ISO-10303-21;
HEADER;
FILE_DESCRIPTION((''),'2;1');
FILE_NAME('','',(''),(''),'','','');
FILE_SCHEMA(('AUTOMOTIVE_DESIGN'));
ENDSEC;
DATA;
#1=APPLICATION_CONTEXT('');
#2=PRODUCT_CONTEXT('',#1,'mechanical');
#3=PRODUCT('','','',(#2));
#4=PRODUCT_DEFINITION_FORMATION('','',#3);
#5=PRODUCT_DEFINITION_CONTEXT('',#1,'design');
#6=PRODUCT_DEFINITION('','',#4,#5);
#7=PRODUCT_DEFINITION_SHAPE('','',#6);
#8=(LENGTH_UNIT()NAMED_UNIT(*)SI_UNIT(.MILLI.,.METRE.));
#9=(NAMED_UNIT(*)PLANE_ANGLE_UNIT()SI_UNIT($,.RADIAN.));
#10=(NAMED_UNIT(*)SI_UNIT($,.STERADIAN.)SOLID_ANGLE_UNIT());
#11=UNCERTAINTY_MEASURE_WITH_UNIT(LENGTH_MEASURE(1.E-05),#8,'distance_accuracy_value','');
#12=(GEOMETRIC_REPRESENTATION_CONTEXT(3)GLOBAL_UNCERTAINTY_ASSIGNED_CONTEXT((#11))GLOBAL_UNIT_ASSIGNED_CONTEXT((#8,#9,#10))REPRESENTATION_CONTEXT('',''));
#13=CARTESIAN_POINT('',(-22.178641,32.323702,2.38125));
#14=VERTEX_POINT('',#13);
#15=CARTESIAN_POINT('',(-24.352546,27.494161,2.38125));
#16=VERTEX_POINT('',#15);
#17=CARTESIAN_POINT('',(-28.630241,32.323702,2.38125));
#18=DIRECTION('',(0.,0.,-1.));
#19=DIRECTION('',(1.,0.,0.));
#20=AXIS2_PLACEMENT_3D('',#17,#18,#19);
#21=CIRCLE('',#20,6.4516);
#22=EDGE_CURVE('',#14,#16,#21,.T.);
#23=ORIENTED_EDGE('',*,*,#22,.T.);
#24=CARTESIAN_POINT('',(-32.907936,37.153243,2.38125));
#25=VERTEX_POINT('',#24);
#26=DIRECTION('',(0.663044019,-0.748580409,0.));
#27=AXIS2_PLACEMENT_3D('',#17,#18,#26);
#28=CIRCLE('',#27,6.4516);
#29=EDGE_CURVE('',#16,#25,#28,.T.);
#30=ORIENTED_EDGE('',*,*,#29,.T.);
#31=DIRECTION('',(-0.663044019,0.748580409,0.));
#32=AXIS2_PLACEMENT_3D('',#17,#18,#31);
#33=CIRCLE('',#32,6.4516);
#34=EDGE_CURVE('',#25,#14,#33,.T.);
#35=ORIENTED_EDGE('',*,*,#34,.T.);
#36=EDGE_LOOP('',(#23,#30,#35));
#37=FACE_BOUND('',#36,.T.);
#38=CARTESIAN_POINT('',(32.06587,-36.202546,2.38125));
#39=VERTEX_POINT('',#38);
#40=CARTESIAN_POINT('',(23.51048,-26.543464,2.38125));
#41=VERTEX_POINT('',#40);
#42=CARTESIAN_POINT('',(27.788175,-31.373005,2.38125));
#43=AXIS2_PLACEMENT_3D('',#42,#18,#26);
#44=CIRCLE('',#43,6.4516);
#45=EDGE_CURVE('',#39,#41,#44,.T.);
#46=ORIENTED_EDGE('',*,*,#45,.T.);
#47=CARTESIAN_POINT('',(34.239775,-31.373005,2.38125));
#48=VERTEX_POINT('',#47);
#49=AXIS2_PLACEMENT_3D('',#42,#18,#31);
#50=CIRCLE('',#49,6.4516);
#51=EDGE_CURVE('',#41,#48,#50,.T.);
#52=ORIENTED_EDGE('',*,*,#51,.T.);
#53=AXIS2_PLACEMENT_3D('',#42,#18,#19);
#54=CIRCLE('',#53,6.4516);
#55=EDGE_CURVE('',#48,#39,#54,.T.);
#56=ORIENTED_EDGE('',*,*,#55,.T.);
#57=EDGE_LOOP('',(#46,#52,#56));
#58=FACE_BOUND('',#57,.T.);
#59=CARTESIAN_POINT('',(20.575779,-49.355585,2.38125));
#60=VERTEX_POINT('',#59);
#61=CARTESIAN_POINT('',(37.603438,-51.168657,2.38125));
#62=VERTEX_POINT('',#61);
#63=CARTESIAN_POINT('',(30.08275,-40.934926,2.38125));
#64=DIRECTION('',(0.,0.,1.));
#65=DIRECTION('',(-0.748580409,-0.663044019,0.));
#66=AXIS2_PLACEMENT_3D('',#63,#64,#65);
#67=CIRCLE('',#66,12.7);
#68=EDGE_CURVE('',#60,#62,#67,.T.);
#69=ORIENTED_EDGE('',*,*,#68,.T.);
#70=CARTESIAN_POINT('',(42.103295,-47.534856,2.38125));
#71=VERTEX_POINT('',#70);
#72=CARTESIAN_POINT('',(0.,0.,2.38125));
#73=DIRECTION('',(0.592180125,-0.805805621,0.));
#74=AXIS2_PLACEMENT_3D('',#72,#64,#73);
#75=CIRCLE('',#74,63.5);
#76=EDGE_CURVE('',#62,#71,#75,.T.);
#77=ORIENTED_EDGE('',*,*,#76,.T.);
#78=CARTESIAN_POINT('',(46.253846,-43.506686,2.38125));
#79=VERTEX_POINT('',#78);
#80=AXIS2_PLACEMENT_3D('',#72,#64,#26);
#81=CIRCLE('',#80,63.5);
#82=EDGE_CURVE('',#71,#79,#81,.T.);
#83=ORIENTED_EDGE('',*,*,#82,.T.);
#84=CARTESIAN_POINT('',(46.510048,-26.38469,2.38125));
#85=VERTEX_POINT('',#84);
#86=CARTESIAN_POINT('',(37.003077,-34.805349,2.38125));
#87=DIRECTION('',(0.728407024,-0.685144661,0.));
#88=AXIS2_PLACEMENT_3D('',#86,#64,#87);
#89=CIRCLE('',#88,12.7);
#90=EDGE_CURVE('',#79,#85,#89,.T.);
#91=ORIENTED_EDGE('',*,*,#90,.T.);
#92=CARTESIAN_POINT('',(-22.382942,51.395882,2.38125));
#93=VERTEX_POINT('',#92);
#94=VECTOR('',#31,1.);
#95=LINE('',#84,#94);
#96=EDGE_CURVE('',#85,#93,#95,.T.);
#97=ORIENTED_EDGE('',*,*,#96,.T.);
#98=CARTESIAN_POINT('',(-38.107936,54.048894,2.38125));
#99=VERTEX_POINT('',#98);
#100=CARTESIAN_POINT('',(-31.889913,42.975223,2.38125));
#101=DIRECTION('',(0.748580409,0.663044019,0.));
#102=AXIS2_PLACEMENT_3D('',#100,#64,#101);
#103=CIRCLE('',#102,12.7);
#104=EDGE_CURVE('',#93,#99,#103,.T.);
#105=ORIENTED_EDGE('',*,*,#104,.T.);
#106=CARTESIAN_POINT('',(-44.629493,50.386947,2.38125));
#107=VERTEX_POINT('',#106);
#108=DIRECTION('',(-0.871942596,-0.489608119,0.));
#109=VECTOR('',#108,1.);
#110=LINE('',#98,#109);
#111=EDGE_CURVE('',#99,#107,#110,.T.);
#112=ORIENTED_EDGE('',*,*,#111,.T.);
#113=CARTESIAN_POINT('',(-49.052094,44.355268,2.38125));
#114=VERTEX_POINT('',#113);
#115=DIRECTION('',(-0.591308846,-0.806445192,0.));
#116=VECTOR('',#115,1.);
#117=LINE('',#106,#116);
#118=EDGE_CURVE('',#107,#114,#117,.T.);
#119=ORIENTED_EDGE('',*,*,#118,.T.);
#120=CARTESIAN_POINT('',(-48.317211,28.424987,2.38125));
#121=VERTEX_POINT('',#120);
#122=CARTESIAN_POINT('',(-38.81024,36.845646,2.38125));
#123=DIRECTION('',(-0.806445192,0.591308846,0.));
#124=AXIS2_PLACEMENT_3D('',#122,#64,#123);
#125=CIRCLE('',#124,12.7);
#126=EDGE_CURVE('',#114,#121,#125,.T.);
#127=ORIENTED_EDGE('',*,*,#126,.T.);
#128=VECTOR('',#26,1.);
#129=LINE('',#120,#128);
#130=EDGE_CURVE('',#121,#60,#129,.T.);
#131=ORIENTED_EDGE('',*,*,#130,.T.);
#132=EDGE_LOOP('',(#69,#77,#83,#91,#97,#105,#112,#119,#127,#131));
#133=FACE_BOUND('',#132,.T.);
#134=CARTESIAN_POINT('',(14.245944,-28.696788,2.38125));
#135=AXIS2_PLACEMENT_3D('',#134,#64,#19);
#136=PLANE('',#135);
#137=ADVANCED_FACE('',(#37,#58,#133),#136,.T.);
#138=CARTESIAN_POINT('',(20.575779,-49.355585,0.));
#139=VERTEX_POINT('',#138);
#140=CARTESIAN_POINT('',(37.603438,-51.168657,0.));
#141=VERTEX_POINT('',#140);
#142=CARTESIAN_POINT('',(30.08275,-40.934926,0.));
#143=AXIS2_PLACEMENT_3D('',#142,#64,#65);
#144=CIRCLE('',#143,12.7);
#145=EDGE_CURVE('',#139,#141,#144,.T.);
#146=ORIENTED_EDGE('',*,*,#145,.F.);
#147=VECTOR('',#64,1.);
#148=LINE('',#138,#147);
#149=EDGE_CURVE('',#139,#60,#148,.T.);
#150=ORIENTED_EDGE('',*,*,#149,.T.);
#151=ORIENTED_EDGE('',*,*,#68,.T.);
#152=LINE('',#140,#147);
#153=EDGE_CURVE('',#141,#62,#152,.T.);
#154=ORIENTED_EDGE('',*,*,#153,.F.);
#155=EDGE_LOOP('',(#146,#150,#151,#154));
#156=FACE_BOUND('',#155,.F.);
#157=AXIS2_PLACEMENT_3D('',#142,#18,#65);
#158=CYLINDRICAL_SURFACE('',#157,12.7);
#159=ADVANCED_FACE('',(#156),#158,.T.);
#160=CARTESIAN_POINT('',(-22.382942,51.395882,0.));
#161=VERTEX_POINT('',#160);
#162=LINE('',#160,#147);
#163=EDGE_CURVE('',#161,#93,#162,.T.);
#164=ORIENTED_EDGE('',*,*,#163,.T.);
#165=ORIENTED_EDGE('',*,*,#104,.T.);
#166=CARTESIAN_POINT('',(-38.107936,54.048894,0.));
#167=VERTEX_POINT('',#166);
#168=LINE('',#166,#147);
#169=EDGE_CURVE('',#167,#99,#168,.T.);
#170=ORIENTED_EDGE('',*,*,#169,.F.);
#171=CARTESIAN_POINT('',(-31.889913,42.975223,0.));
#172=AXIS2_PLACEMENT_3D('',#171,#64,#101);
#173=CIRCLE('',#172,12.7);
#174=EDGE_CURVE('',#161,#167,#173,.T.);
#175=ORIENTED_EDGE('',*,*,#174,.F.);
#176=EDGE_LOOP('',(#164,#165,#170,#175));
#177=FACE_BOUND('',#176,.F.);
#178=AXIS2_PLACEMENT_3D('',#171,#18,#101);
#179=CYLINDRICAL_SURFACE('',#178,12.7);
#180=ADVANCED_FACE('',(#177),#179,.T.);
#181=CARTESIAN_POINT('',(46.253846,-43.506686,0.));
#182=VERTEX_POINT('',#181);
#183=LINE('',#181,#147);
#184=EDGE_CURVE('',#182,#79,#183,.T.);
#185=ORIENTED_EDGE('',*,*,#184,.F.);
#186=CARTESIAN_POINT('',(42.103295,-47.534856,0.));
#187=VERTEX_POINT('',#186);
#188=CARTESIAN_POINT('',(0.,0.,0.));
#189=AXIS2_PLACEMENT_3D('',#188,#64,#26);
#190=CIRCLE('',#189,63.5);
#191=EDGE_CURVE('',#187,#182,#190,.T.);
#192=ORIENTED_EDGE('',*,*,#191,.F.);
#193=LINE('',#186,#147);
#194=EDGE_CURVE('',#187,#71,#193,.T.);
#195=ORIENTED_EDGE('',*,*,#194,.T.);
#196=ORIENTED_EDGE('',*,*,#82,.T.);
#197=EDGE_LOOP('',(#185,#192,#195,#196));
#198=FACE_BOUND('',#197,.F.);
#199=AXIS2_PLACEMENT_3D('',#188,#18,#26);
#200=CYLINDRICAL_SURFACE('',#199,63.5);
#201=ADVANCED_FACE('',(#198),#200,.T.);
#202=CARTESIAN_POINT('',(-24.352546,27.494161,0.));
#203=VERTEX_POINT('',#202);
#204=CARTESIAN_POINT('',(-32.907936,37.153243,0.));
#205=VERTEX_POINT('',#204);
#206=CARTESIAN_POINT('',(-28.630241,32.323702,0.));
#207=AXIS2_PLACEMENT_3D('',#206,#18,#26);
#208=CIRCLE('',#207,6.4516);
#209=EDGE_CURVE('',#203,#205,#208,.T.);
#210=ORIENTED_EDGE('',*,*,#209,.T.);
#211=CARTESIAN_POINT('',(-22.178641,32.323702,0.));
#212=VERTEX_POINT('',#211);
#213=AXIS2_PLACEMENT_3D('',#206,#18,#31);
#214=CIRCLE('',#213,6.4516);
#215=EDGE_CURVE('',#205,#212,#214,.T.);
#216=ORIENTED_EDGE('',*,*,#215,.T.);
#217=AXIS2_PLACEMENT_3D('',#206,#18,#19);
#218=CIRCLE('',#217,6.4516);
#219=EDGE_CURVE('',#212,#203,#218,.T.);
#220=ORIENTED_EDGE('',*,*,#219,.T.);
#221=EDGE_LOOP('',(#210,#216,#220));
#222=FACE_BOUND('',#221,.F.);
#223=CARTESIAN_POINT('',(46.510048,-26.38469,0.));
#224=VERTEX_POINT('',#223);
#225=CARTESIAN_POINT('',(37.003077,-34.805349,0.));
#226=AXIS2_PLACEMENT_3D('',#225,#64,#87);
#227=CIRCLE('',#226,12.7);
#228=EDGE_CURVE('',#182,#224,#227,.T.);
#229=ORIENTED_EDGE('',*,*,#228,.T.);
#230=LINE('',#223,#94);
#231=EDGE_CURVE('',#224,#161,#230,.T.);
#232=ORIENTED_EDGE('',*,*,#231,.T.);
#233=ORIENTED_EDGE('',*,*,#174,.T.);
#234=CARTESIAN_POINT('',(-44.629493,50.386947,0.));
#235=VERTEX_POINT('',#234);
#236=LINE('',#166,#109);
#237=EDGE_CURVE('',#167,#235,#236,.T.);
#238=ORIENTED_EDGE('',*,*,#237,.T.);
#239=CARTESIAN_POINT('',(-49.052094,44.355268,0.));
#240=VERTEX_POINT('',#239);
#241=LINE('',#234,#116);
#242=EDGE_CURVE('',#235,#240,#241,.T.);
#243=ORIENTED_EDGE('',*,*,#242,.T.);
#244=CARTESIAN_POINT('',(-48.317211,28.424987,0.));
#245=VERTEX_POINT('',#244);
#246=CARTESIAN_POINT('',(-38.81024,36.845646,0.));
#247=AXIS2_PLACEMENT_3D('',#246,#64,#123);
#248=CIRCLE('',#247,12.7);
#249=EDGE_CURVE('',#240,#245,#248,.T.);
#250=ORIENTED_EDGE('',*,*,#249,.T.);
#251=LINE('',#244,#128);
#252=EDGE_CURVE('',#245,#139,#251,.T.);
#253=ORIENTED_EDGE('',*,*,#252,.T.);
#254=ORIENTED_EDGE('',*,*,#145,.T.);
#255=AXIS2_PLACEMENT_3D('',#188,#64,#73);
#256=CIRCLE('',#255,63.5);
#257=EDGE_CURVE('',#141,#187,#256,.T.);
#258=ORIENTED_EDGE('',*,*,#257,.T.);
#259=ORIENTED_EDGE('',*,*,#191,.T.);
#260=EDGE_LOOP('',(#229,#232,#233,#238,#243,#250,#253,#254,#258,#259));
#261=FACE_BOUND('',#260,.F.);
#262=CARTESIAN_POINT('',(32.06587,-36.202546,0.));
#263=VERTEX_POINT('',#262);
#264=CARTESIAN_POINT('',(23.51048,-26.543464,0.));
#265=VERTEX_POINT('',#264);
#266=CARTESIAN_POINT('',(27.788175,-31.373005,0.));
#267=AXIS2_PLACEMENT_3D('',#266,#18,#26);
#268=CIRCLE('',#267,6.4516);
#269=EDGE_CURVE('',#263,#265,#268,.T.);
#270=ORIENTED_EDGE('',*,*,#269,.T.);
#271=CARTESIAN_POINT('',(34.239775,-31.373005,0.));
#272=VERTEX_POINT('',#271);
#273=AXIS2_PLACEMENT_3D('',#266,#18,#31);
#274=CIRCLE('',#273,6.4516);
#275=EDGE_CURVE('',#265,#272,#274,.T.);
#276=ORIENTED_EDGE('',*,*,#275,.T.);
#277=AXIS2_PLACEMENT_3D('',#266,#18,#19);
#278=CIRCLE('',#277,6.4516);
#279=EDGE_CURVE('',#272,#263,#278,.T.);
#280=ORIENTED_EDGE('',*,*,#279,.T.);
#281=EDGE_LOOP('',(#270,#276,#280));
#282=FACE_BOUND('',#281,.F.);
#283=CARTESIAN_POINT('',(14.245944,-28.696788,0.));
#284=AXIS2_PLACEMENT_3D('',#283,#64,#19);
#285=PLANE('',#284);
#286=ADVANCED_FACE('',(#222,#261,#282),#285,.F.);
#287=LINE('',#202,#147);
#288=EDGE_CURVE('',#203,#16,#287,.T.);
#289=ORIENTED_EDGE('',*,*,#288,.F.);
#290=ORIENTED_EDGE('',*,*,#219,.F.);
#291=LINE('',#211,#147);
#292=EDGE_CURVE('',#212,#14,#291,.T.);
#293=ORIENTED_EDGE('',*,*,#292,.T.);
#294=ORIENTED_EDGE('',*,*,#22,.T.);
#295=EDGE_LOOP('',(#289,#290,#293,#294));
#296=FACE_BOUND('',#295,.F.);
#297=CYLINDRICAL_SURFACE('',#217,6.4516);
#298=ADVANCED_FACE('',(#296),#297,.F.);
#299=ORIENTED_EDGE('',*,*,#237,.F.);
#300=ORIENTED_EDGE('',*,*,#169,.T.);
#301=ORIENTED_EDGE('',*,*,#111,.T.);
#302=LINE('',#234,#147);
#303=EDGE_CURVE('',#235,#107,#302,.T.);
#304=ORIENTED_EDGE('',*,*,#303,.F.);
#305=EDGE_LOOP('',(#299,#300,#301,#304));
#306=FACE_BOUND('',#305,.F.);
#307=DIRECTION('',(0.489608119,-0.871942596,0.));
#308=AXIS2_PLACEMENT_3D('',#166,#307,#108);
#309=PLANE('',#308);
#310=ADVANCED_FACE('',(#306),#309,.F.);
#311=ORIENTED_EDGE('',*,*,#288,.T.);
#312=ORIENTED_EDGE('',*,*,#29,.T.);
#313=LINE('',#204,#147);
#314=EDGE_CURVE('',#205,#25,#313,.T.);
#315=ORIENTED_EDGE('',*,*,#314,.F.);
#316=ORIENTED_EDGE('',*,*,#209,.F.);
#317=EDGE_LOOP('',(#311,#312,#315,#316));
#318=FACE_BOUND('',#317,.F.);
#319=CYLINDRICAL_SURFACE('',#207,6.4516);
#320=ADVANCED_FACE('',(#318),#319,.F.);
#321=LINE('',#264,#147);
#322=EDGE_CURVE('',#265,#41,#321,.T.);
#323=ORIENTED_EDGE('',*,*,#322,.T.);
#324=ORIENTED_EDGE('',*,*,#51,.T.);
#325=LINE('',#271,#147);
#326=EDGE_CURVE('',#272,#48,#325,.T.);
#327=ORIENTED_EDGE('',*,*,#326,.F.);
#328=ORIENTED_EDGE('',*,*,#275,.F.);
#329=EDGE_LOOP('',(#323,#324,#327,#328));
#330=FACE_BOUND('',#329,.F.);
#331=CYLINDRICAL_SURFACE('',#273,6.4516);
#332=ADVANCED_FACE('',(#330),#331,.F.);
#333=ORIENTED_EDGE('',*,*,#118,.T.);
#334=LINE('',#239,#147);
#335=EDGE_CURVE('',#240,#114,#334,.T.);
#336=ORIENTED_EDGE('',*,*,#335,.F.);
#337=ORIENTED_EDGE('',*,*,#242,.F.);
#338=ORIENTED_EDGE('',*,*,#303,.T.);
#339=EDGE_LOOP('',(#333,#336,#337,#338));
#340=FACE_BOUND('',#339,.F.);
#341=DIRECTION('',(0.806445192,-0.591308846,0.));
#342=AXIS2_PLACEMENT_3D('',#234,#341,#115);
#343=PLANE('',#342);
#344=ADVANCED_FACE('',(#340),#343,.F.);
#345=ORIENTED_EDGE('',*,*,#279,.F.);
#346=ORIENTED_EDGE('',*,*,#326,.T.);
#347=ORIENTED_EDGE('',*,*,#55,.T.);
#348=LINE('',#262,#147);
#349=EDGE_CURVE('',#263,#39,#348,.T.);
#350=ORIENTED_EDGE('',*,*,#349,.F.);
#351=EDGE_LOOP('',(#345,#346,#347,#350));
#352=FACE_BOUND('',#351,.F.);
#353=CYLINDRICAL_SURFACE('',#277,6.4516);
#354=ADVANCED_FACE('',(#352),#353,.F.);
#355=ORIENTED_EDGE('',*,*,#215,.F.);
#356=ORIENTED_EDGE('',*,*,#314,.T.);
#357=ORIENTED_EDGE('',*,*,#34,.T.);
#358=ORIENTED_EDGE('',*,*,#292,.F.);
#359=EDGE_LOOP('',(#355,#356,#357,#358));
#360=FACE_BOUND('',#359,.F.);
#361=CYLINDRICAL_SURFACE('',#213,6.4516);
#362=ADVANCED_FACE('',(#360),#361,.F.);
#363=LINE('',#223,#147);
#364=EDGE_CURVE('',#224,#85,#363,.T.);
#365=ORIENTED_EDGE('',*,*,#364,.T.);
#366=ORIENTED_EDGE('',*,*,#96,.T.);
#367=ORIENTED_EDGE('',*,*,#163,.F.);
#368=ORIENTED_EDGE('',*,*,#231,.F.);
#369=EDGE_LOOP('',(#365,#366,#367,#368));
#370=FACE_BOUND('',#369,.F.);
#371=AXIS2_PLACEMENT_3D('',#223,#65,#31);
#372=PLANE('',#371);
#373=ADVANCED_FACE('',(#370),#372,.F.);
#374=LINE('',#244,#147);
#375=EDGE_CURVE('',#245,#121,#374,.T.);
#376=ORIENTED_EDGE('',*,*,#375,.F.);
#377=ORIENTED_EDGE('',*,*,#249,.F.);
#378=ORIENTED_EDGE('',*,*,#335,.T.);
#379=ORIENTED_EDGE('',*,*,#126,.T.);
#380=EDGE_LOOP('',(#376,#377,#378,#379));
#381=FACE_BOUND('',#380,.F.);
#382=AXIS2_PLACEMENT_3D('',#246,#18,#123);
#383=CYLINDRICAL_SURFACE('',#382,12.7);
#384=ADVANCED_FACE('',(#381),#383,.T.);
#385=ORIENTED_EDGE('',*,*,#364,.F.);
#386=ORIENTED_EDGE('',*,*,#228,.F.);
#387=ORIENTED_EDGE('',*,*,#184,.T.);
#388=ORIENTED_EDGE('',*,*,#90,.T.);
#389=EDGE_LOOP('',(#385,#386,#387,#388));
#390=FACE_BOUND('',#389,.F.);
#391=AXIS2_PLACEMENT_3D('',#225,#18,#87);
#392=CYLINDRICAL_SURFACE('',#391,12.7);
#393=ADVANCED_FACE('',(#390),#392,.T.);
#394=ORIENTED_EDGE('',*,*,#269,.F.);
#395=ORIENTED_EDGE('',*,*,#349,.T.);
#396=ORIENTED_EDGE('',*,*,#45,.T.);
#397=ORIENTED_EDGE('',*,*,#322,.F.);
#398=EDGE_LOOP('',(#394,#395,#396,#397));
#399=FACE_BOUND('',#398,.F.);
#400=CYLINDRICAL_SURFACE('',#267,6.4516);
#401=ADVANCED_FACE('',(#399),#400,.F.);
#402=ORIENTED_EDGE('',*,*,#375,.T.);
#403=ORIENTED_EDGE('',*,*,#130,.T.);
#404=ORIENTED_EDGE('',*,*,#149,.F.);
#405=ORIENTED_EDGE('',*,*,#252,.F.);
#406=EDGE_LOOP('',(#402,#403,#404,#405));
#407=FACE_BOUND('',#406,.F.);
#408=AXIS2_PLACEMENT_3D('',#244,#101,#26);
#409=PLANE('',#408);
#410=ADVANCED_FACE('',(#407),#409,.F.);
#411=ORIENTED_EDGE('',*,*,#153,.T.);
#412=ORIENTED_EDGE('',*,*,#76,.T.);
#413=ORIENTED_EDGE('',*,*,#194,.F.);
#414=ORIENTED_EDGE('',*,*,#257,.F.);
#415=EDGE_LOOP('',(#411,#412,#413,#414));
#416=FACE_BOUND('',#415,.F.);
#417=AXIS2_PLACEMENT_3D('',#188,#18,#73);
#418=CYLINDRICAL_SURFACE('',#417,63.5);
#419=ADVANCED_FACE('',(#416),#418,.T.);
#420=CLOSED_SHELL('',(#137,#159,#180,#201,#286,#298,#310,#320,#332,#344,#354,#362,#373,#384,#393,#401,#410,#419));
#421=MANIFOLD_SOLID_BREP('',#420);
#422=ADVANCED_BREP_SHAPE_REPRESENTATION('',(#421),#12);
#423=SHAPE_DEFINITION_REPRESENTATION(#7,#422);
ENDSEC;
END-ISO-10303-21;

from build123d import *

# Parameters (mm, degrees)
F1_DEPTH = 2.38125


# Not quite as in the source:
# - a feature names something its author has since deleted; it is built from what else it names


with BuildPart() as f1:
    # F0 (on Top) → F1 (new body)
    with BuildSketch(Plane.XY):
        with BuildLine():
            Line((0.0148852749, -0.0168055587), (-12.9522491515, -11.5022529852))
            Line((-12.9522491515, -11.5022529852), (20.5757791682, -49.3555846081))
            ThreePointArc((20.5757791682, -49.3555846081), (28.7380799657, -53.5635383735), (37.6034379496, -51.168656953))
            ThreePointArc((37.6034379496, -51.168656953), (39.8947610083, -49.4030165485), (42.1032952287, -47.5348559574))
            Line((42.1032952287, -47.5348559574), (32.0658696462, -36.2025462971))
            ThreePointArc((32.0658696462, -36.2025462971), (22.9586334857, -35.6506997271), (23.5104800557, -26.5434635666))
            Line((23.5104800557, -26.5434635666), (0.0148852749, -0.0168055587))
        make_face()
        with BuildLine():
            Line((12.9820197013, 11.4686418678), (0.0148852749, -0.0168055587))
            Line((0.0148852749, -0.0168055587), (23.5104800557, -26.5434635666))
            ThreePointArc((23.5104800557, -26.5434635666), (30.4363031351, -25.4899309777), (34.2397748509, -31.3730049319))
            ThreePointArc((34.2397748509, -31.3730049319), (33.6712488051, -34.0211332161), (32.0658696462, -36.2025462971))
            Line((32.0658696462, -36.2025462971), (42.1032952287, -47.5348559574))
            ThreePointArc((42.1032952287, -47.5348559574), (44.2244575032, -45.5680519503), (46.2538460369, -43.5066860011))
            ThreePointArc((46.2538460369, -43.5066860011), (49.7016552964, -34.9953617498), (46.510048021, -26.3846897551))
            Line((46.510048021, -26.3846897551), (12.9820197013, 11.4686418678))
        make_face()
        with BuildLine():
            Line((-48.3172110137, 28.4249868882), (-12.9522491515, -11.5022529852))
            Line((-12.9522491515, -11.5022529852), (0.0148852749, -0.0168055587))
            Line((0.0148852749, -0.0168055587), (0, 0))
            Line((0, 0), (-24.3525459603, 27.4941606857))
            ThreePointArc((-24.3525459603, 27.4941606857), (-33.4597821208, 28.0460072558), (-32.9079355507, 37.1532434163))
            Line((-32.9079355507, 37.1532434163), (-44.6294929424, 50.3869473148))
            Line((-44.6294929424, 50.3869473148), (-49.0520937641, 44.3552682835))
            ThreePointArc((-49.0520937641, 44.3552682835), (-51.4967480049, 36.2604022841), (-48.3172110137, 28.4249868882))
        make_face()
        with BuildLine():
            Line((0, 0), (0.0148852749, -0.0168055587))
            Line((0.0148852749, -0.0168055587), (12.9820197013, 11.4686418678))
            Line((12.9820197013, 11.4686418678), (-22.3829421609, 51.3958817412))
            ThreePointArc((-22.3829421609, 51.3958817412), (-29.7771159339, 55.4982449772), (-38.1079364614, 54.0488936593))
            Line((-38.1079364614, 54.0488936593), (-44.6294929424, 50.3869473148))
            Line((-44.6294929424, 50.3869473148), (-32.9079355507, 37.1532434163))
            ThreePointArc((-32.9079355507, 37.1532434163), (-25.9821124713, 38.2067760052), (-22.1786407555, 32.323702051))
            ThreePointArc((-22.1786407555, 32.323702051), (-22.7471668013, 29.6755737668), (-24.3525459603, 27.4941606857))
            Line((-24.3525459603, 27.4941606857), (0, 0))
        make_face()
    extrude(amount=F1_DEPTH)


solid = f1.part
